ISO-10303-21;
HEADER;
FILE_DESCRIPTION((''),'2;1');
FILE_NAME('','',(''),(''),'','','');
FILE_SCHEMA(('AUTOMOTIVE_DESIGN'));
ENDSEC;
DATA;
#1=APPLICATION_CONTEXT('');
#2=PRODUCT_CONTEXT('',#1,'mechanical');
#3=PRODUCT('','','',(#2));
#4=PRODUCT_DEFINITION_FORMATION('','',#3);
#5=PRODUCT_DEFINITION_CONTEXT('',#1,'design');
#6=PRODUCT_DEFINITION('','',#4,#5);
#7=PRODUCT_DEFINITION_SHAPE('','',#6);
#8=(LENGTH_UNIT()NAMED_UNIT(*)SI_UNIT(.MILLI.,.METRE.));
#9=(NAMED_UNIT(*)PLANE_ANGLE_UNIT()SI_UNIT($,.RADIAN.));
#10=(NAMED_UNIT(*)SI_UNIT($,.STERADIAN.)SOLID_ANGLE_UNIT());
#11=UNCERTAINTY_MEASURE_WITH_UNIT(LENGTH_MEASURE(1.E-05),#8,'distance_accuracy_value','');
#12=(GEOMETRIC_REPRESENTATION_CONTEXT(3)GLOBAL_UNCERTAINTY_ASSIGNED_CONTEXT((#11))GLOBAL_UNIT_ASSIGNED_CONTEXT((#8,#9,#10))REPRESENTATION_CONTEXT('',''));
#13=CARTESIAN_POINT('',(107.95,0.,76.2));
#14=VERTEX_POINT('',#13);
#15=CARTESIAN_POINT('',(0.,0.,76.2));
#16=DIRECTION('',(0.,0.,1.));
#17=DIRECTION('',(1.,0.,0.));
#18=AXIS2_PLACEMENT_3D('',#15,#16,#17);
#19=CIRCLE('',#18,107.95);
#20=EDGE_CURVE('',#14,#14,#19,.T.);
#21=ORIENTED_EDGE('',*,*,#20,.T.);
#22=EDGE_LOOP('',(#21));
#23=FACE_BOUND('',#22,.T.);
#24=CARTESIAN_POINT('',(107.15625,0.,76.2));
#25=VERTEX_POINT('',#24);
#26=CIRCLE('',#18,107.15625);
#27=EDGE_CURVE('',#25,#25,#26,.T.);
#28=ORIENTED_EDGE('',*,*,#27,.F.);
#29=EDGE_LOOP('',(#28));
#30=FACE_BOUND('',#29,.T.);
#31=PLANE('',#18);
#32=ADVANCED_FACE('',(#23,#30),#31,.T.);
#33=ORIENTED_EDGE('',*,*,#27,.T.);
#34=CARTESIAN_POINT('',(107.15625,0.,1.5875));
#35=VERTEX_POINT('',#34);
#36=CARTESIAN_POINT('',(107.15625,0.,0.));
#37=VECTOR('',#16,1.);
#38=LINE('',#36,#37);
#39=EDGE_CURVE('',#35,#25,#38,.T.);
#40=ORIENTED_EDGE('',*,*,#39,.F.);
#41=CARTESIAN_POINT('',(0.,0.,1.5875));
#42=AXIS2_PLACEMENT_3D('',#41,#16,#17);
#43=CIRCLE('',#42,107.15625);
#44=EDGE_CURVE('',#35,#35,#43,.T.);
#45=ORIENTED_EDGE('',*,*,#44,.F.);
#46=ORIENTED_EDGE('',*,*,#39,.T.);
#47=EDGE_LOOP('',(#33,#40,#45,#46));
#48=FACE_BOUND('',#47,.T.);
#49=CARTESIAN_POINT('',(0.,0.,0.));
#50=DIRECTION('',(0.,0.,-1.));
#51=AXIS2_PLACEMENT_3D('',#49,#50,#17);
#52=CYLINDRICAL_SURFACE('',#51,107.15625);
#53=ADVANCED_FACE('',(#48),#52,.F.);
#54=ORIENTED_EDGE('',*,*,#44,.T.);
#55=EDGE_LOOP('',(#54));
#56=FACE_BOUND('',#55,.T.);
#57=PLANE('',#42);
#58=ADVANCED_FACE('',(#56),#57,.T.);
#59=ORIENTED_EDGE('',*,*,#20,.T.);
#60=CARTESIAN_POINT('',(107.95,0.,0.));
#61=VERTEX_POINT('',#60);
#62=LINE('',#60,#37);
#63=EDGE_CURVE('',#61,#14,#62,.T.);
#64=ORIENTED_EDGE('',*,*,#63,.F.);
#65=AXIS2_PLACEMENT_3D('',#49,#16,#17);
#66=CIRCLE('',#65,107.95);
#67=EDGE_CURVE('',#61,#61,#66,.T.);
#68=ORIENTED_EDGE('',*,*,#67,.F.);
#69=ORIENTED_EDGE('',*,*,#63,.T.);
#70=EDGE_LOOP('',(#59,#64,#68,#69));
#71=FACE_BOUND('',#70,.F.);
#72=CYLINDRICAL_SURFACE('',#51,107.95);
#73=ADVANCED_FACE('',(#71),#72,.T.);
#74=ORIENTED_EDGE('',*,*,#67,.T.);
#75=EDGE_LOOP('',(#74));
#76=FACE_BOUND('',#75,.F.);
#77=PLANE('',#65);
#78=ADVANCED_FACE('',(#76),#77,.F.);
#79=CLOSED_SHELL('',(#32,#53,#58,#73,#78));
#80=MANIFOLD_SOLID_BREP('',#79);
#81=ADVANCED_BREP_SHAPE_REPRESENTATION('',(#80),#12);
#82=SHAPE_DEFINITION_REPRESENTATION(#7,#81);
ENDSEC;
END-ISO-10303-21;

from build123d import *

# Parameters (mm, degrees)
F0_R     = 107.95
F0_R_2   = 107.15625
F1_DEPTH = 76.2
F2_DEPTH = 1.5875


# Not quite as in the source:
# - a length typed as a fraction of an inch, garbled in the dataset ("3 / 203.2 mm" for 3/8 in), is restored


with BuildPart() as f1:
    # F0 (on Top) → F1 (new body)
    with BuildSketch(Plane.XY):
        Circle(F0_R)
        Circle(F0_R_2, mode=Mode.SUBTRACT)
    extrude(amount=F1_DEPTH)

    # F0 (on Top) → F2 (join)
    with BuildSketch(Plane.XY):
        Circle(F0_R_2)
    extrude(amount=F2_DEPTH)


solid = f1.part
